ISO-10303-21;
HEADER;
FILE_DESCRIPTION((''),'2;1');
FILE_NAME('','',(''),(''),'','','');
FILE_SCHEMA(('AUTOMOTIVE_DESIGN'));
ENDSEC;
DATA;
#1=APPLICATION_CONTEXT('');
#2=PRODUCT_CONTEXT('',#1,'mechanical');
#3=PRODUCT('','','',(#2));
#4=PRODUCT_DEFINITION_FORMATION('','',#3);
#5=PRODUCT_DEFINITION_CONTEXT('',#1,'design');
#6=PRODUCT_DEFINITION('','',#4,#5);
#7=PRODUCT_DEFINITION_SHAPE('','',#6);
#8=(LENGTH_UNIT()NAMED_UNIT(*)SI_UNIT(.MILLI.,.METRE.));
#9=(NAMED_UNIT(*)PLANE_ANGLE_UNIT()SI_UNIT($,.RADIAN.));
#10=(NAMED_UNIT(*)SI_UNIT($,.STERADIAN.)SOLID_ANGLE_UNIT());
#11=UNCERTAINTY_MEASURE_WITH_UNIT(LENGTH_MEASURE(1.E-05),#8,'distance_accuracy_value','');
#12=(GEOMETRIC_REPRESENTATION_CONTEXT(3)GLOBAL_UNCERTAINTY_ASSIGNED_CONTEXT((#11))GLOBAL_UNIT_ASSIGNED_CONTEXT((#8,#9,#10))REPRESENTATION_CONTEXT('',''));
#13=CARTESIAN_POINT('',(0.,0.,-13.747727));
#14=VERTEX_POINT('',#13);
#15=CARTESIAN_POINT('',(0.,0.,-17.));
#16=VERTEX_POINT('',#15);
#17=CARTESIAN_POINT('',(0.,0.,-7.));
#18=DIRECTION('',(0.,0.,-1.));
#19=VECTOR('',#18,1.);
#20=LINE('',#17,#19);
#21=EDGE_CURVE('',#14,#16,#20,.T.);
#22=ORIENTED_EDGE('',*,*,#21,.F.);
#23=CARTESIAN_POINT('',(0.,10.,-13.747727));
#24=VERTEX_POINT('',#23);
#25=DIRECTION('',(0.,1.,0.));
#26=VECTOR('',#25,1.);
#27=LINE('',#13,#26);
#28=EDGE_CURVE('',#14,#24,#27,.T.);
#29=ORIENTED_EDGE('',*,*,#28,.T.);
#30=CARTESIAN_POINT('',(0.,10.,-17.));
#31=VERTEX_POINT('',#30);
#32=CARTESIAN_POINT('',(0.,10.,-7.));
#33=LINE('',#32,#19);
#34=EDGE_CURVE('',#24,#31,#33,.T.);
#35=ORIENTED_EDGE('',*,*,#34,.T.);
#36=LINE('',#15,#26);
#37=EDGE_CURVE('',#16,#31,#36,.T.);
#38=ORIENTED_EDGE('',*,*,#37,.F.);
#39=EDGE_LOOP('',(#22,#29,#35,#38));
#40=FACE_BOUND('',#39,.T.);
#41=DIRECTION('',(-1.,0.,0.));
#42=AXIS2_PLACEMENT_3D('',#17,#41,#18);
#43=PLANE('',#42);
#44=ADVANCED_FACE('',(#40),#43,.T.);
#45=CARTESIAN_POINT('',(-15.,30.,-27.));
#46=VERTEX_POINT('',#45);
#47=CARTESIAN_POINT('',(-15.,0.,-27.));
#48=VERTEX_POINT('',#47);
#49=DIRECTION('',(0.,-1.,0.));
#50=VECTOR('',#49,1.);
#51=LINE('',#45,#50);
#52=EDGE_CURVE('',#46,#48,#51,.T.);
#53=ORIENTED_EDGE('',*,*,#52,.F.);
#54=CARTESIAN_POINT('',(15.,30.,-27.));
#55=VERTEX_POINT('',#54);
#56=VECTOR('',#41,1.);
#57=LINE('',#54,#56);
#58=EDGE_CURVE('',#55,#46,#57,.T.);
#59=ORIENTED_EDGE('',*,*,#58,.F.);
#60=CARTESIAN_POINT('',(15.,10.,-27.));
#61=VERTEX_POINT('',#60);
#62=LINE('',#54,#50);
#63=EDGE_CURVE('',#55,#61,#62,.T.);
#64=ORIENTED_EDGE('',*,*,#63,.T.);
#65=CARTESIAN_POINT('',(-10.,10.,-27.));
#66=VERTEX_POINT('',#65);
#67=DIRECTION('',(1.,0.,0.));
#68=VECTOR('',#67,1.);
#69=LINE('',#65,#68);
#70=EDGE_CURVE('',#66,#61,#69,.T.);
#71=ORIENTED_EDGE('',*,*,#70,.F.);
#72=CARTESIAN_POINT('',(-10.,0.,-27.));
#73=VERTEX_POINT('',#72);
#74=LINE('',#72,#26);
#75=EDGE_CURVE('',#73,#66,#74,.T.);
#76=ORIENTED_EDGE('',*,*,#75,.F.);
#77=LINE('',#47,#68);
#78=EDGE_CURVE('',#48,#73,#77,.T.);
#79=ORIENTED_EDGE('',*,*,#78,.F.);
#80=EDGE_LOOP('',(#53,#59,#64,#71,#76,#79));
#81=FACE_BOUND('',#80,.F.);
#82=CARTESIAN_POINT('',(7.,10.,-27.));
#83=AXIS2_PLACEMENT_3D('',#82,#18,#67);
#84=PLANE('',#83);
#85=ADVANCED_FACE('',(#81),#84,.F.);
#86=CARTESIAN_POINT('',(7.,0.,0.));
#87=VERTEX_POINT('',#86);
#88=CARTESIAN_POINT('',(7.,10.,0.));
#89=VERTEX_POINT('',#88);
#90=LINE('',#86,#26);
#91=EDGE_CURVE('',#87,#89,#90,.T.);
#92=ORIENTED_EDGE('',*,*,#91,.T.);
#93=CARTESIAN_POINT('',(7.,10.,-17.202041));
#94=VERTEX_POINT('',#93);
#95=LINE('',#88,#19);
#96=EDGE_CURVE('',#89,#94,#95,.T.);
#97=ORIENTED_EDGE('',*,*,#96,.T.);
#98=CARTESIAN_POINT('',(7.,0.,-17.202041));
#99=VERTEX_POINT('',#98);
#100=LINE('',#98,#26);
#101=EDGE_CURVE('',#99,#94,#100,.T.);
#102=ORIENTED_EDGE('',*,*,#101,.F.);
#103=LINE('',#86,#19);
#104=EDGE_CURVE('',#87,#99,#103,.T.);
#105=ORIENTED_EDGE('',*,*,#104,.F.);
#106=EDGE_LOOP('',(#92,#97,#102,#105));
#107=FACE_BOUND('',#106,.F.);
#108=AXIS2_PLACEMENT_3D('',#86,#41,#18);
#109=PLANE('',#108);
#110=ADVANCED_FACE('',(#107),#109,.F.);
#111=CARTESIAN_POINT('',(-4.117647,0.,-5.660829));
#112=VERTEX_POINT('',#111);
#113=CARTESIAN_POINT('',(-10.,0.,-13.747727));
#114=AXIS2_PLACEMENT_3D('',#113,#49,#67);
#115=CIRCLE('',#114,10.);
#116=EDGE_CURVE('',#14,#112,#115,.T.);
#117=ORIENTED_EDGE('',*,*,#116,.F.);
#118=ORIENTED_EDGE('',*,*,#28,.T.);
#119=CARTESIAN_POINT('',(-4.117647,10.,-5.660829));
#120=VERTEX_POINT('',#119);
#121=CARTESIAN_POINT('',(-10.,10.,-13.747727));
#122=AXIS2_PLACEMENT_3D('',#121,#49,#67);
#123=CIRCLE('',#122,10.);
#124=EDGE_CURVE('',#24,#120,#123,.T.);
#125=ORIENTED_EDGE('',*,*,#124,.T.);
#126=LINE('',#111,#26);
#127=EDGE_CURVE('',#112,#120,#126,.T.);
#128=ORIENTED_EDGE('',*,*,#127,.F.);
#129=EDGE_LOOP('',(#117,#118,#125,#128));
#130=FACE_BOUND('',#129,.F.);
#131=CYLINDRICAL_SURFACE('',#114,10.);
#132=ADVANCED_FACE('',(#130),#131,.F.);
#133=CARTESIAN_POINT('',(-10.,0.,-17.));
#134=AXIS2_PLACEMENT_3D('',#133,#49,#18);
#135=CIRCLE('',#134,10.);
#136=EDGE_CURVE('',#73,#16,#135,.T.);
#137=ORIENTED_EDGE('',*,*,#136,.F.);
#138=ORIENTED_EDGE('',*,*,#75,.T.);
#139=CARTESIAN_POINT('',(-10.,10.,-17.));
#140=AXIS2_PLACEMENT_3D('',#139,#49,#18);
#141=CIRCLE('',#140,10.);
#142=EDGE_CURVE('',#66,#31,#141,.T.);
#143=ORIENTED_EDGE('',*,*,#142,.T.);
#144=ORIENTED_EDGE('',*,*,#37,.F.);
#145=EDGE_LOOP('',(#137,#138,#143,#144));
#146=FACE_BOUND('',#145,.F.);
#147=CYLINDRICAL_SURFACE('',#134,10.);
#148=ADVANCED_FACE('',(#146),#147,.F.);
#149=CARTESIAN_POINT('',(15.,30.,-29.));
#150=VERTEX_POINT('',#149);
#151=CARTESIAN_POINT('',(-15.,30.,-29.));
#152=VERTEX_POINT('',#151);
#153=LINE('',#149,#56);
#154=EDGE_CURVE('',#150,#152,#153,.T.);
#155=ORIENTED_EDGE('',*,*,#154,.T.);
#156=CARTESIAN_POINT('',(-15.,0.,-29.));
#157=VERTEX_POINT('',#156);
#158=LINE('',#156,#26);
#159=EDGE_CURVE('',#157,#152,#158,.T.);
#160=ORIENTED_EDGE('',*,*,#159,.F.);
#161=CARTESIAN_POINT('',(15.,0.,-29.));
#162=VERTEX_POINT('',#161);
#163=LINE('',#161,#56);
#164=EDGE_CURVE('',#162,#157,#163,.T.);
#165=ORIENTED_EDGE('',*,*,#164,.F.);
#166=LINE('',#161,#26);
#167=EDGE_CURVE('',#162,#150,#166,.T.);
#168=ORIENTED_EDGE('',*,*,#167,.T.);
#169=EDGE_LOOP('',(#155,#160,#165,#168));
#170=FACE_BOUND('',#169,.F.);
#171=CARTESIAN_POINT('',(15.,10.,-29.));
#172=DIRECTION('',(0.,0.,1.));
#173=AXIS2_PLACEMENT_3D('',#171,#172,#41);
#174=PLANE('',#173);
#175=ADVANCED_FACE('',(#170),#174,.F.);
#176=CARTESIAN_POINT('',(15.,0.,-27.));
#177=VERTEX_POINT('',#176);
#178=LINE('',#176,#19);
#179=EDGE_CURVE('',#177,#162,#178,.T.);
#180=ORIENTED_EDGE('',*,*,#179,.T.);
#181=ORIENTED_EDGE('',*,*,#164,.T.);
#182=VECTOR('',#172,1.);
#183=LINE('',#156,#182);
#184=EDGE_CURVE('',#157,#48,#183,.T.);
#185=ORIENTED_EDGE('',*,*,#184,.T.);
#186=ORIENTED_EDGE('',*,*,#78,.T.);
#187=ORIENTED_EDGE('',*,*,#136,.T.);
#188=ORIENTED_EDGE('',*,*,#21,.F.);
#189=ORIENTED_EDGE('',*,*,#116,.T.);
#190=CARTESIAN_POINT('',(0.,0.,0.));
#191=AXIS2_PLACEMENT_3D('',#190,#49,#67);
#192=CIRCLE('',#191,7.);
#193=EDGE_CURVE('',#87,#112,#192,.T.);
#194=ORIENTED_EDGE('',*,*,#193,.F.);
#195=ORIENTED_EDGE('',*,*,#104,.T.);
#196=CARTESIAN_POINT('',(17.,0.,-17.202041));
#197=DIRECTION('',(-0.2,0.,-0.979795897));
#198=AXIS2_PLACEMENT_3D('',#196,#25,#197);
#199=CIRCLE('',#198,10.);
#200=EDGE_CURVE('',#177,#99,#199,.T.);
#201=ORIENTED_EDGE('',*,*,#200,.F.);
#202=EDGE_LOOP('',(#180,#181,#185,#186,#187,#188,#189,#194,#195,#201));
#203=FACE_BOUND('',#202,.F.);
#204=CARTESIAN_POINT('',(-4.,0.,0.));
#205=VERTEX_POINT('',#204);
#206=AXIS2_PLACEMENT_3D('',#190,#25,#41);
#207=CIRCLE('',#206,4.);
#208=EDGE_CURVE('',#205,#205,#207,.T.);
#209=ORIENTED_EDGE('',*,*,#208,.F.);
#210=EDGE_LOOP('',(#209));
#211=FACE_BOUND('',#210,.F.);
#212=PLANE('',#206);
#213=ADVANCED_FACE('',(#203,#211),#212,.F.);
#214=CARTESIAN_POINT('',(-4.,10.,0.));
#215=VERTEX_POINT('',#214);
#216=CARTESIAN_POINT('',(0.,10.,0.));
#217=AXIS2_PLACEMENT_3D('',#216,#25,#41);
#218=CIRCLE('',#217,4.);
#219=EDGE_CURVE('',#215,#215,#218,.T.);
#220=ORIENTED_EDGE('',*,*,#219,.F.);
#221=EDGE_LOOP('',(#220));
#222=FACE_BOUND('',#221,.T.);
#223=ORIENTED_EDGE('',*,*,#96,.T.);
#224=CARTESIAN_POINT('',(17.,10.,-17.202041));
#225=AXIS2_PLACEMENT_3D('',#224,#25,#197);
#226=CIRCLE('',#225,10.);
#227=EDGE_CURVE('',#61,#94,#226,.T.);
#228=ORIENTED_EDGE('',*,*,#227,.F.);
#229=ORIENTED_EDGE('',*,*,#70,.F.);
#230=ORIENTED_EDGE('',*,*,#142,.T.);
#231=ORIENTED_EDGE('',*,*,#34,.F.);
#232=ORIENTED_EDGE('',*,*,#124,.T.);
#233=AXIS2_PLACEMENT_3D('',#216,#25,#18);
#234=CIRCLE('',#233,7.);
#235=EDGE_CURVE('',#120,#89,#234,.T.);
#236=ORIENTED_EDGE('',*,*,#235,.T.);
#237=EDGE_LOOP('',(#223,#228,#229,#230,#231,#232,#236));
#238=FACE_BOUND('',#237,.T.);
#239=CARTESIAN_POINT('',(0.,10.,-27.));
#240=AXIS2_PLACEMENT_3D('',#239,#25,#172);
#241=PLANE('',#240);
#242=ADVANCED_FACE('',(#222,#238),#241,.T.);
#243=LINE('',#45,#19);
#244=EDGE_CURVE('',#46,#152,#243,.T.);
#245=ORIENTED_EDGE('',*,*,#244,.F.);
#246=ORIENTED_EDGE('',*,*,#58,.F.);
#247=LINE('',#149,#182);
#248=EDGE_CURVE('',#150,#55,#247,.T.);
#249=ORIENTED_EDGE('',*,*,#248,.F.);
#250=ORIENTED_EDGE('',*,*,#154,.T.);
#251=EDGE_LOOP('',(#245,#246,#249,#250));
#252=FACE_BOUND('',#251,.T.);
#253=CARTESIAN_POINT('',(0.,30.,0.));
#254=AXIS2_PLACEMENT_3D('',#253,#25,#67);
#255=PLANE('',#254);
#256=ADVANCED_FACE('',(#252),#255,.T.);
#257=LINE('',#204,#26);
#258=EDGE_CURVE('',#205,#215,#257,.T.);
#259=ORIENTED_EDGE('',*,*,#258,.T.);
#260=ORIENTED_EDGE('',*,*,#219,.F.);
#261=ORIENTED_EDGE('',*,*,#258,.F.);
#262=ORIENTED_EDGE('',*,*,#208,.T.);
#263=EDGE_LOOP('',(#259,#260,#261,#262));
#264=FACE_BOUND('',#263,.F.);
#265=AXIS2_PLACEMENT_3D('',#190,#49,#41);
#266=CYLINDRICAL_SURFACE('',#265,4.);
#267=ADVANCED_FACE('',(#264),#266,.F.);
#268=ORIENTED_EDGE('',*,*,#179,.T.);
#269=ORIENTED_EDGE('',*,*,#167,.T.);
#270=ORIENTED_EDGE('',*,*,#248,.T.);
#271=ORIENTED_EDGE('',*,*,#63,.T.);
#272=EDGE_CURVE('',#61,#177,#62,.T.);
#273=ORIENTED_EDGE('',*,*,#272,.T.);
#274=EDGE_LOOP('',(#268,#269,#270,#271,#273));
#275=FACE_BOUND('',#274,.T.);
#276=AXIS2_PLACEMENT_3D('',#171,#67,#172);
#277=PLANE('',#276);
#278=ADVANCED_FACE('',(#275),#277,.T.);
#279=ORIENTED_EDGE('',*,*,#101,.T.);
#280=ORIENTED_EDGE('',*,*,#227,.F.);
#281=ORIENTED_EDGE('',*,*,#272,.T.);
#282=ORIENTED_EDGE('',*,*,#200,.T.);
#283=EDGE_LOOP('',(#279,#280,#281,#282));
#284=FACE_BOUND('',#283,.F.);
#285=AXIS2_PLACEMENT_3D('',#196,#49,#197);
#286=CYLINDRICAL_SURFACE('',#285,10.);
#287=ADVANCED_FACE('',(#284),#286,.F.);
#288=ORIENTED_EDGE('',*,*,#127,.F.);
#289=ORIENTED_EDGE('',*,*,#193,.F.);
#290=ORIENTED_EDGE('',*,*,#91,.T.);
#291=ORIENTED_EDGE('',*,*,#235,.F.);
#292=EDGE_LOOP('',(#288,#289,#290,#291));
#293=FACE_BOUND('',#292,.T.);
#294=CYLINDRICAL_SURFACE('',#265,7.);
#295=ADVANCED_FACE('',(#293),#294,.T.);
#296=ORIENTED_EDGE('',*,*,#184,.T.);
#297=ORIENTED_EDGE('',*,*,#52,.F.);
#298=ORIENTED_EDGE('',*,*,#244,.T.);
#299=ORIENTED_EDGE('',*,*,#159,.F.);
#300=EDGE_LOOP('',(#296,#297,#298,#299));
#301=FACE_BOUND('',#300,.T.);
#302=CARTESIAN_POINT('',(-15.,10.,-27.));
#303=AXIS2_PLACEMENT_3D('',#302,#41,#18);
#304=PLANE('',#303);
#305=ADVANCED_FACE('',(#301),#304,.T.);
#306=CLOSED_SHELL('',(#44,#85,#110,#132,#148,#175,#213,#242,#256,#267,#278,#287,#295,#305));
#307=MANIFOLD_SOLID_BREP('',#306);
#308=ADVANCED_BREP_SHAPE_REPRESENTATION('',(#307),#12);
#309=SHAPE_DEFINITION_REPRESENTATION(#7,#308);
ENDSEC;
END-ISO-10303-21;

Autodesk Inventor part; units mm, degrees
ref_plane "YZ Plane" through (0, 0, 0) normal (1, 0, 0) x (0, 1, 0)
ref_plane "XZ Plane" through (0, 0, 0) normal (0, 1, 0) x (-1, 0, 0)
ref_plane "XY Plane" through (0, 0, 0) normal (0, 0, 1) x (1, 0, 0)
sketch "Sketch1" plane through (0, 0, 0) normal (0, 1, 0) x (-1, 0, 0)
  circle A0 centre (0, 0) radius 4
  line L0 (0, 0) -> (0, -28) construction
  line L1 (-15, -29) -> (15, -29)
  line L2 (15, -29) -> (15, -27)
  line L3 (15, -27) -> (-15, -27)
  line L4 (-15, -27) -> (-15, -29)
  line L5 (-15, -29) -> (15, -27) construction
  line L6 (15, -29) -> (-15, -27) construction
  circle A1 centre (0, 0) radius 7
  line L7 (0, -7) -> (0, -27)
  line L8 (-7, 0) -> (-7, -27)
  dimension "d0" = 8
  dimension "d1" = 28
  dimension "d2" = 30
  dimension "d3" = 2
  dimension "d4" = 3
extrude "Extrusion1" add sketch "Sketch1" along normal blind 10
sketch "Sketch2" plane through (0, 10, 0) normal (0, 1, 0) x (1, 0, 0)
  line L0 (15, 29) -> (-15, 29) projected
  line L1 (7, 27) -> (15, 27) projected
  line L2 (-15, 29) -> (15, 29)
  line L3 (15, 29) -> (15, 27)
  line L4 (15, 27) -> (-15, 27)
  line L5 (-15, 27) -> (-15, 29)
  point P0 (0, 0)
extrude "Extrusion2" add sketch "Sketch2" along normal blind 20
fillet "Fillet1" radius 10 3 edges at (7, 5, -27) (0, 5, -27) (0, 5, -7)
properties part number "pivotholder"
